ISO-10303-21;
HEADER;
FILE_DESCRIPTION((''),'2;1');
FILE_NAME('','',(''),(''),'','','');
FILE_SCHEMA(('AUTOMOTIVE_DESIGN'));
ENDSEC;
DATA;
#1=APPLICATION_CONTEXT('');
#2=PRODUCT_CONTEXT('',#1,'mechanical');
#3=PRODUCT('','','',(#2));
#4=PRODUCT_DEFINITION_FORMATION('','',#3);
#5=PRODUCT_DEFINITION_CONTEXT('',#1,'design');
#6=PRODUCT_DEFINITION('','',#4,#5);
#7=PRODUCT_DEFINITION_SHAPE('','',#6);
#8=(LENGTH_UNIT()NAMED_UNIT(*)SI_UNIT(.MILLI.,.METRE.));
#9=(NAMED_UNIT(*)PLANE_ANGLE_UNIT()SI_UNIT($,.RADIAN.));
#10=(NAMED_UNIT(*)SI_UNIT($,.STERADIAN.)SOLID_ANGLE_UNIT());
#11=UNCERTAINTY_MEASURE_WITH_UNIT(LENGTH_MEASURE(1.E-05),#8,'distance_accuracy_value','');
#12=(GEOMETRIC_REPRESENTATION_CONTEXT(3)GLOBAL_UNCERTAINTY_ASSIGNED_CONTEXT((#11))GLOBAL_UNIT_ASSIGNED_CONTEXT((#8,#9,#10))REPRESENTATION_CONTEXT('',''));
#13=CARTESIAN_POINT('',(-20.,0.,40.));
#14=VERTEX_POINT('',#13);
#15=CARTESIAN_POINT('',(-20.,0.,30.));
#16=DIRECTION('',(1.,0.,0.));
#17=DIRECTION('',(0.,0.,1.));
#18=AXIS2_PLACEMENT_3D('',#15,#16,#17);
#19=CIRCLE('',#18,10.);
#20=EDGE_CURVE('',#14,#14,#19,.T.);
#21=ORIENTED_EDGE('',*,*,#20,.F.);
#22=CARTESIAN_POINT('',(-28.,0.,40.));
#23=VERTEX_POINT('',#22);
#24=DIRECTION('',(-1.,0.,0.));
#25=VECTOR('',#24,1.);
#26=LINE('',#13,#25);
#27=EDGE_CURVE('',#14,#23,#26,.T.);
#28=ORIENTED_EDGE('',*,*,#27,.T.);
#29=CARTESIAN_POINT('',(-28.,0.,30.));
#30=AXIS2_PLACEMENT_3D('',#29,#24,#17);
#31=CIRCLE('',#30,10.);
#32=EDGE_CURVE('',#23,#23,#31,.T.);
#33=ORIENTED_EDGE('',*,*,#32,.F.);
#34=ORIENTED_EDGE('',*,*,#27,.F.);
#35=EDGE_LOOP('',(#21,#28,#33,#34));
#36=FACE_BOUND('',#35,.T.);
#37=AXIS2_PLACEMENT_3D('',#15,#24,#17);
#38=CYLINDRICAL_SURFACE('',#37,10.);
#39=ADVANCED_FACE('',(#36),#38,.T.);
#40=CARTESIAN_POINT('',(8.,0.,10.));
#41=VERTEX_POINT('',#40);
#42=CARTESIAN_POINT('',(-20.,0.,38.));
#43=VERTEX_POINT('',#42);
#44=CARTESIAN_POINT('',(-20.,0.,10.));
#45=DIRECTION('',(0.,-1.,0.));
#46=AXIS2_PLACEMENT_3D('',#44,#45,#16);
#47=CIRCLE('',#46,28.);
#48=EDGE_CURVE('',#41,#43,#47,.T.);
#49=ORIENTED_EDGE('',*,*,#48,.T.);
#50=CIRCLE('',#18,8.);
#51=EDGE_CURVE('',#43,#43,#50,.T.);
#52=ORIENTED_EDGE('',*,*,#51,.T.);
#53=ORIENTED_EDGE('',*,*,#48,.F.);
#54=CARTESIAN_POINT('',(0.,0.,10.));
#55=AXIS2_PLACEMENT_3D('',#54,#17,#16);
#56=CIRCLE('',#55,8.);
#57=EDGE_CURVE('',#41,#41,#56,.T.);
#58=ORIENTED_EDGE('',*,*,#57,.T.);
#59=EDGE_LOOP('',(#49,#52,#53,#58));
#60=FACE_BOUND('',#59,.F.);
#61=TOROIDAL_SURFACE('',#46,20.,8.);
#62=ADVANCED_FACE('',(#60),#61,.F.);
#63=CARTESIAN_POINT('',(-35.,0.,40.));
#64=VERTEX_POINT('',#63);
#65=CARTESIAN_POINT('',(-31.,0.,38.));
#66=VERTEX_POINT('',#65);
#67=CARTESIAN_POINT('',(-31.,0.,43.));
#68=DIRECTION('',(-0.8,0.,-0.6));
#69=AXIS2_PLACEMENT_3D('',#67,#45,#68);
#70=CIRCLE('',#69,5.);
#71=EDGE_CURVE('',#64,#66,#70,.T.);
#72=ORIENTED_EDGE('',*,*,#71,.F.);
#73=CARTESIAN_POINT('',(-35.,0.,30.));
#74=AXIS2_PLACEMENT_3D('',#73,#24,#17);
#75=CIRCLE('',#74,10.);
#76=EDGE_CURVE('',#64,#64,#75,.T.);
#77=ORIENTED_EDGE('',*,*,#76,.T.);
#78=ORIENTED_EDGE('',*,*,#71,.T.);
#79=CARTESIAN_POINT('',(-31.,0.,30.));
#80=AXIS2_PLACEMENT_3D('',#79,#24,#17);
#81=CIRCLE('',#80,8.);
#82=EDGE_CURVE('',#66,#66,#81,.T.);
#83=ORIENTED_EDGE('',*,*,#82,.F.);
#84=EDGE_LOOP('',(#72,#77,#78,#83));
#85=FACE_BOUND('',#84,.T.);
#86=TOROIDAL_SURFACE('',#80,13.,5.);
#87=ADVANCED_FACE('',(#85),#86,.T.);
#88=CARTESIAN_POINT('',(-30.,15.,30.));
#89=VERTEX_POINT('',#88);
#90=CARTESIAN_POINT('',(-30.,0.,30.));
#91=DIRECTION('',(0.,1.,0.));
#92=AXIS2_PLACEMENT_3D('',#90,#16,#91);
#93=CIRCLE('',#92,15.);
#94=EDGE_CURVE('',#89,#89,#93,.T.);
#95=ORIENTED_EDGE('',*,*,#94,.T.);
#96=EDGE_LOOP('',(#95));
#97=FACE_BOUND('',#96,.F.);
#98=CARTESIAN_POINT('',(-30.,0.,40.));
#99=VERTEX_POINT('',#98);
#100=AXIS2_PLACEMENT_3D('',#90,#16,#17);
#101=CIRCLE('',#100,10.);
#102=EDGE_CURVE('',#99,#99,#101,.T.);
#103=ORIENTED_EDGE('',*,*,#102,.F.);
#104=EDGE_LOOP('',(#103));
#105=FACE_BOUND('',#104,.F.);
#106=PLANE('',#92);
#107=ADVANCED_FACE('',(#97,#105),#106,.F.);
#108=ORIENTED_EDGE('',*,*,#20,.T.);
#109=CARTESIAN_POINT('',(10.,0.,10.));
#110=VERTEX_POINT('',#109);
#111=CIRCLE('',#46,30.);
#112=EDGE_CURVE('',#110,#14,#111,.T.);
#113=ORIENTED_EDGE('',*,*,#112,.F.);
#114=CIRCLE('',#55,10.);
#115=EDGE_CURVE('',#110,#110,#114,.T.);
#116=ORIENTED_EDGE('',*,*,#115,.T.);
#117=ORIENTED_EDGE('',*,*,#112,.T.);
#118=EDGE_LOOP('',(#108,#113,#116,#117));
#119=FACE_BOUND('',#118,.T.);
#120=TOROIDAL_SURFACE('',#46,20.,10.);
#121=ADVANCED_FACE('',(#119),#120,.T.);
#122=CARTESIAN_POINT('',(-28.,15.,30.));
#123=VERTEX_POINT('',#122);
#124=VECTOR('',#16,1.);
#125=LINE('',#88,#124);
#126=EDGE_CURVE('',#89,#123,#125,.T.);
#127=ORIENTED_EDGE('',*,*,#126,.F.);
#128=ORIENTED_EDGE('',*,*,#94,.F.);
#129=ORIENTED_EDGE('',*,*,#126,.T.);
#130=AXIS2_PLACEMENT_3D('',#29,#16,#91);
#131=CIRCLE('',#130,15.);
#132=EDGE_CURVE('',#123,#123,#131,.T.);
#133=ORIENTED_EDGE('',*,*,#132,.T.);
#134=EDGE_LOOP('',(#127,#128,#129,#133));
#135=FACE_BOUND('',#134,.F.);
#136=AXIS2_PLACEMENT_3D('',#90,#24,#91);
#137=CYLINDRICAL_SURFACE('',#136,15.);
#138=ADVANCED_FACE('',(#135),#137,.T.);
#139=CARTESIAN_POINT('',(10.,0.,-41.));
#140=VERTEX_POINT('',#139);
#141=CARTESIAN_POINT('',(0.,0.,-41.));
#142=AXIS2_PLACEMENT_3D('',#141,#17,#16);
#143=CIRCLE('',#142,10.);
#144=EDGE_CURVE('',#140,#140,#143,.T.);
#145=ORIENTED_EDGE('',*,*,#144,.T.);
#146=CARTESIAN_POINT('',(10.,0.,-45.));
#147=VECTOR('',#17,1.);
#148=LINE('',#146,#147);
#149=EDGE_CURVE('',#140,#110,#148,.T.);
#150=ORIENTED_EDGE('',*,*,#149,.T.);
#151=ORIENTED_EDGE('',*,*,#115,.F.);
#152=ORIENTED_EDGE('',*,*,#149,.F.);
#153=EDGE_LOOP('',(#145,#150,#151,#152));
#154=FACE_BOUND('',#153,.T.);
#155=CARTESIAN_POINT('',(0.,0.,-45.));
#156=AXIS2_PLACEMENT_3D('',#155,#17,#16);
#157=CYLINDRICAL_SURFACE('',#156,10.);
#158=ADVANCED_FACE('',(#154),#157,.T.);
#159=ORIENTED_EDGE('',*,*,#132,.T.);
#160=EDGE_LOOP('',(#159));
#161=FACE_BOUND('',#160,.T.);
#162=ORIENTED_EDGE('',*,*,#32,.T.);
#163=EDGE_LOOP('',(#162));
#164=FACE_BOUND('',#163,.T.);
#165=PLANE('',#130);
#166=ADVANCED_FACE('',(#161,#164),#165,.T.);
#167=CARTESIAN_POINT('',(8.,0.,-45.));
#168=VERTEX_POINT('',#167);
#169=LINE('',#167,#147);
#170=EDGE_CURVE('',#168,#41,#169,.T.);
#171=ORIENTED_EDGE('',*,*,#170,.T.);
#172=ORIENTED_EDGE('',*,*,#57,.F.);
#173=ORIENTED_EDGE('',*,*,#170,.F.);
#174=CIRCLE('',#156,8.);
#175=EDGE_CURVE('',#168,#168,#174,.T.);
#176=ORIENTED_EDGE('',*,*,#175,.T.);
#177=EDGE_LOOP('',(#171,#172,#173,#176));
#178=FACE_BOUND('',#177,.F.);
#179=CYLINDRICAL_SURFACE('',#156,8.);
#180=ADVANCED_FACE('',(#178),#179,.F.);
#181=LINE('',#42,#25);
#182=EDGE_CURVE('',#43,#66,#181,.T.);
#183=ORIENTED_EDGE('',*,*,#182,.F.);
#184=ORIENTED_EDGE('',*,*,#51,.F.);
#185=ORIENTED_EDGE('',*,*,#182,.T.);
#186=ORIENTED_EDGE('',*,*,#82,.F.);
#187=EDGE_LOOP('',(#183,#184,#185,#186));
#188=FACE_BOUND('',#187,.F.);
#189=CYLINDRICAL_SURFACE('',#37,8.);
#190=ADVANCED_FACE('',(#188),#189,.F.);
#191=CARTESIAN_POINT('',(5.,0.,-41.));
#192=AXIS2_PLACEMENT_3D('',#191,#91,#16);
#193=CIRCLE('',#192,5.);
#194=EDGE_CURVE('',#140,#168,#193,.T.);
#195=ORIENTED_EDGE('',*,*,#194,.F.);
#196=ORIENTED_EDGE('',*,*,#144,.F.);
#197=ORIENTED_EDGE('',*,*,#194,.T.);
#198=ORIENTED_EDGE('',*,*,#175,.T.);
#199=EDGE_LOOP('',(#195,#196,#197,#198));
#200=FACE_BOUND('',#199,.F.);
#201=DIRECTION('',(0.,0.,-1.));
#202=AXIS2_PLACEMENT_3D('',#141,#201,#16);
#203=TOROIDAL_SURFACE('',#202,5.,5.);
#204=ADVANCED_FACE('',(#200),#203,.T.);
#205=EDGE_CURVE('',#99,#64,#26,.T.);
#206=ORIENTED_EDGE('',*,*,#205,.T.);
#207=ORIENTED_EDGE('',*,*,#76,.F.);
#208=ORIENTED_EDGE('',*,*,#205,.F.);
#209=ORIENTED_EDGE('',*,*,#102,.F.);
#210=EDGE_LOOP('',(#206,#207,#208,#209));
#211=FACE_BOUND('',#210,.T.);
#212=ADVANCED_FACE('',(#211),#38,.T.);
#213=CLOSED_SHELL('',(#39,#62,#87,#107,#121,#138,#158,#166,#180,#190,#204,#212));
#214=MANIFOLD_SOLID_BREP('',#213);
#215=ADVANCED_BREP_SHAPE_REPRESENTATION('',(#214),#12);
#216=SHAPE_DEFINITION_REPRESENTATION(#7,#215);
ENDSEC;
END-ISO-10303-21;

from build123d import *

# Parameters (mm, degrees)
F2_R     = 10
F2_R_2   = 8
F7_R     = 15
F7_R_2   = 10
F8_DEPTH = 2


# Not quite as in the source:
# - a fillet or chamfer that OpenCascade refuses, or shapes differently, is made with other operations: its cross-section is extruded or revolved along the edge and cut away or added


with BuildPart() as f3:
    # F3: sweep along a path in F0
    with BuildLine(Plane.XZ) as f3_path:
        Line((0, -45), (0, 10))
        ThreePointArc((0, 10), (-5.8578643763, 24.1421356237), (-20, 30))
        Line((-20, 30), (-35, 30))
    # F2 (on plane+point) → F3 (sweep)
    with BuildSketch(Plane.XY.offset(-45)):
        Circle(F2_R)
        Circle(F2_R_2, mode=Mode.SUBTRACT)
    sweep(path=f3_path.line)

    # F4: fillet of radius 5 on 1 edges, made by hand

    # F4_s1 → F4_t2 (revolve, cut)
    with BuildSketch(Plane.XZ):
        with BuildLine():
            ThreePointArc((10, -41), (9.472135955, -43.2360679775), (8, -45))
            Line((8, -45), (10, -45))
            Line((10, -45), (10, -41))
        make_face()
    revolve(axis=Axis((0, 0, -45), (0, 0, 1)), mode=Mode.SUBTRACT)

    # F5: fillet of radius 5 on 1 edges, made by hand

    # F5_s1 → F5_t2 (revolve, cut)
    with BuildSketch(Plane.XZ):
        with BuildLine():
            ThreePointArc((-35, 40), (-33.2360679775, 38.527864045), (-31, 38))
            Line((-31, 38), (-35, 38))
            Line((-35, 38), (-35, 40))
        make_face()
    revolve(axis=Axis((-35, 0, 30), (-1, 0, 0)), mode=Mode.SUBTRACT)

    # F7 (on offset) → F8 (join)
    with BuildSketch(Plane.YZ.offset(-30)):
        with Locations((0, 30)):
            Circle(F7_R)
        with Locations((0, 30)):
            Circle(F7_R_2, mode=Mode.SUBTRACT)
    extrude(amount=F8_DEPTH)


solid = f3.part
